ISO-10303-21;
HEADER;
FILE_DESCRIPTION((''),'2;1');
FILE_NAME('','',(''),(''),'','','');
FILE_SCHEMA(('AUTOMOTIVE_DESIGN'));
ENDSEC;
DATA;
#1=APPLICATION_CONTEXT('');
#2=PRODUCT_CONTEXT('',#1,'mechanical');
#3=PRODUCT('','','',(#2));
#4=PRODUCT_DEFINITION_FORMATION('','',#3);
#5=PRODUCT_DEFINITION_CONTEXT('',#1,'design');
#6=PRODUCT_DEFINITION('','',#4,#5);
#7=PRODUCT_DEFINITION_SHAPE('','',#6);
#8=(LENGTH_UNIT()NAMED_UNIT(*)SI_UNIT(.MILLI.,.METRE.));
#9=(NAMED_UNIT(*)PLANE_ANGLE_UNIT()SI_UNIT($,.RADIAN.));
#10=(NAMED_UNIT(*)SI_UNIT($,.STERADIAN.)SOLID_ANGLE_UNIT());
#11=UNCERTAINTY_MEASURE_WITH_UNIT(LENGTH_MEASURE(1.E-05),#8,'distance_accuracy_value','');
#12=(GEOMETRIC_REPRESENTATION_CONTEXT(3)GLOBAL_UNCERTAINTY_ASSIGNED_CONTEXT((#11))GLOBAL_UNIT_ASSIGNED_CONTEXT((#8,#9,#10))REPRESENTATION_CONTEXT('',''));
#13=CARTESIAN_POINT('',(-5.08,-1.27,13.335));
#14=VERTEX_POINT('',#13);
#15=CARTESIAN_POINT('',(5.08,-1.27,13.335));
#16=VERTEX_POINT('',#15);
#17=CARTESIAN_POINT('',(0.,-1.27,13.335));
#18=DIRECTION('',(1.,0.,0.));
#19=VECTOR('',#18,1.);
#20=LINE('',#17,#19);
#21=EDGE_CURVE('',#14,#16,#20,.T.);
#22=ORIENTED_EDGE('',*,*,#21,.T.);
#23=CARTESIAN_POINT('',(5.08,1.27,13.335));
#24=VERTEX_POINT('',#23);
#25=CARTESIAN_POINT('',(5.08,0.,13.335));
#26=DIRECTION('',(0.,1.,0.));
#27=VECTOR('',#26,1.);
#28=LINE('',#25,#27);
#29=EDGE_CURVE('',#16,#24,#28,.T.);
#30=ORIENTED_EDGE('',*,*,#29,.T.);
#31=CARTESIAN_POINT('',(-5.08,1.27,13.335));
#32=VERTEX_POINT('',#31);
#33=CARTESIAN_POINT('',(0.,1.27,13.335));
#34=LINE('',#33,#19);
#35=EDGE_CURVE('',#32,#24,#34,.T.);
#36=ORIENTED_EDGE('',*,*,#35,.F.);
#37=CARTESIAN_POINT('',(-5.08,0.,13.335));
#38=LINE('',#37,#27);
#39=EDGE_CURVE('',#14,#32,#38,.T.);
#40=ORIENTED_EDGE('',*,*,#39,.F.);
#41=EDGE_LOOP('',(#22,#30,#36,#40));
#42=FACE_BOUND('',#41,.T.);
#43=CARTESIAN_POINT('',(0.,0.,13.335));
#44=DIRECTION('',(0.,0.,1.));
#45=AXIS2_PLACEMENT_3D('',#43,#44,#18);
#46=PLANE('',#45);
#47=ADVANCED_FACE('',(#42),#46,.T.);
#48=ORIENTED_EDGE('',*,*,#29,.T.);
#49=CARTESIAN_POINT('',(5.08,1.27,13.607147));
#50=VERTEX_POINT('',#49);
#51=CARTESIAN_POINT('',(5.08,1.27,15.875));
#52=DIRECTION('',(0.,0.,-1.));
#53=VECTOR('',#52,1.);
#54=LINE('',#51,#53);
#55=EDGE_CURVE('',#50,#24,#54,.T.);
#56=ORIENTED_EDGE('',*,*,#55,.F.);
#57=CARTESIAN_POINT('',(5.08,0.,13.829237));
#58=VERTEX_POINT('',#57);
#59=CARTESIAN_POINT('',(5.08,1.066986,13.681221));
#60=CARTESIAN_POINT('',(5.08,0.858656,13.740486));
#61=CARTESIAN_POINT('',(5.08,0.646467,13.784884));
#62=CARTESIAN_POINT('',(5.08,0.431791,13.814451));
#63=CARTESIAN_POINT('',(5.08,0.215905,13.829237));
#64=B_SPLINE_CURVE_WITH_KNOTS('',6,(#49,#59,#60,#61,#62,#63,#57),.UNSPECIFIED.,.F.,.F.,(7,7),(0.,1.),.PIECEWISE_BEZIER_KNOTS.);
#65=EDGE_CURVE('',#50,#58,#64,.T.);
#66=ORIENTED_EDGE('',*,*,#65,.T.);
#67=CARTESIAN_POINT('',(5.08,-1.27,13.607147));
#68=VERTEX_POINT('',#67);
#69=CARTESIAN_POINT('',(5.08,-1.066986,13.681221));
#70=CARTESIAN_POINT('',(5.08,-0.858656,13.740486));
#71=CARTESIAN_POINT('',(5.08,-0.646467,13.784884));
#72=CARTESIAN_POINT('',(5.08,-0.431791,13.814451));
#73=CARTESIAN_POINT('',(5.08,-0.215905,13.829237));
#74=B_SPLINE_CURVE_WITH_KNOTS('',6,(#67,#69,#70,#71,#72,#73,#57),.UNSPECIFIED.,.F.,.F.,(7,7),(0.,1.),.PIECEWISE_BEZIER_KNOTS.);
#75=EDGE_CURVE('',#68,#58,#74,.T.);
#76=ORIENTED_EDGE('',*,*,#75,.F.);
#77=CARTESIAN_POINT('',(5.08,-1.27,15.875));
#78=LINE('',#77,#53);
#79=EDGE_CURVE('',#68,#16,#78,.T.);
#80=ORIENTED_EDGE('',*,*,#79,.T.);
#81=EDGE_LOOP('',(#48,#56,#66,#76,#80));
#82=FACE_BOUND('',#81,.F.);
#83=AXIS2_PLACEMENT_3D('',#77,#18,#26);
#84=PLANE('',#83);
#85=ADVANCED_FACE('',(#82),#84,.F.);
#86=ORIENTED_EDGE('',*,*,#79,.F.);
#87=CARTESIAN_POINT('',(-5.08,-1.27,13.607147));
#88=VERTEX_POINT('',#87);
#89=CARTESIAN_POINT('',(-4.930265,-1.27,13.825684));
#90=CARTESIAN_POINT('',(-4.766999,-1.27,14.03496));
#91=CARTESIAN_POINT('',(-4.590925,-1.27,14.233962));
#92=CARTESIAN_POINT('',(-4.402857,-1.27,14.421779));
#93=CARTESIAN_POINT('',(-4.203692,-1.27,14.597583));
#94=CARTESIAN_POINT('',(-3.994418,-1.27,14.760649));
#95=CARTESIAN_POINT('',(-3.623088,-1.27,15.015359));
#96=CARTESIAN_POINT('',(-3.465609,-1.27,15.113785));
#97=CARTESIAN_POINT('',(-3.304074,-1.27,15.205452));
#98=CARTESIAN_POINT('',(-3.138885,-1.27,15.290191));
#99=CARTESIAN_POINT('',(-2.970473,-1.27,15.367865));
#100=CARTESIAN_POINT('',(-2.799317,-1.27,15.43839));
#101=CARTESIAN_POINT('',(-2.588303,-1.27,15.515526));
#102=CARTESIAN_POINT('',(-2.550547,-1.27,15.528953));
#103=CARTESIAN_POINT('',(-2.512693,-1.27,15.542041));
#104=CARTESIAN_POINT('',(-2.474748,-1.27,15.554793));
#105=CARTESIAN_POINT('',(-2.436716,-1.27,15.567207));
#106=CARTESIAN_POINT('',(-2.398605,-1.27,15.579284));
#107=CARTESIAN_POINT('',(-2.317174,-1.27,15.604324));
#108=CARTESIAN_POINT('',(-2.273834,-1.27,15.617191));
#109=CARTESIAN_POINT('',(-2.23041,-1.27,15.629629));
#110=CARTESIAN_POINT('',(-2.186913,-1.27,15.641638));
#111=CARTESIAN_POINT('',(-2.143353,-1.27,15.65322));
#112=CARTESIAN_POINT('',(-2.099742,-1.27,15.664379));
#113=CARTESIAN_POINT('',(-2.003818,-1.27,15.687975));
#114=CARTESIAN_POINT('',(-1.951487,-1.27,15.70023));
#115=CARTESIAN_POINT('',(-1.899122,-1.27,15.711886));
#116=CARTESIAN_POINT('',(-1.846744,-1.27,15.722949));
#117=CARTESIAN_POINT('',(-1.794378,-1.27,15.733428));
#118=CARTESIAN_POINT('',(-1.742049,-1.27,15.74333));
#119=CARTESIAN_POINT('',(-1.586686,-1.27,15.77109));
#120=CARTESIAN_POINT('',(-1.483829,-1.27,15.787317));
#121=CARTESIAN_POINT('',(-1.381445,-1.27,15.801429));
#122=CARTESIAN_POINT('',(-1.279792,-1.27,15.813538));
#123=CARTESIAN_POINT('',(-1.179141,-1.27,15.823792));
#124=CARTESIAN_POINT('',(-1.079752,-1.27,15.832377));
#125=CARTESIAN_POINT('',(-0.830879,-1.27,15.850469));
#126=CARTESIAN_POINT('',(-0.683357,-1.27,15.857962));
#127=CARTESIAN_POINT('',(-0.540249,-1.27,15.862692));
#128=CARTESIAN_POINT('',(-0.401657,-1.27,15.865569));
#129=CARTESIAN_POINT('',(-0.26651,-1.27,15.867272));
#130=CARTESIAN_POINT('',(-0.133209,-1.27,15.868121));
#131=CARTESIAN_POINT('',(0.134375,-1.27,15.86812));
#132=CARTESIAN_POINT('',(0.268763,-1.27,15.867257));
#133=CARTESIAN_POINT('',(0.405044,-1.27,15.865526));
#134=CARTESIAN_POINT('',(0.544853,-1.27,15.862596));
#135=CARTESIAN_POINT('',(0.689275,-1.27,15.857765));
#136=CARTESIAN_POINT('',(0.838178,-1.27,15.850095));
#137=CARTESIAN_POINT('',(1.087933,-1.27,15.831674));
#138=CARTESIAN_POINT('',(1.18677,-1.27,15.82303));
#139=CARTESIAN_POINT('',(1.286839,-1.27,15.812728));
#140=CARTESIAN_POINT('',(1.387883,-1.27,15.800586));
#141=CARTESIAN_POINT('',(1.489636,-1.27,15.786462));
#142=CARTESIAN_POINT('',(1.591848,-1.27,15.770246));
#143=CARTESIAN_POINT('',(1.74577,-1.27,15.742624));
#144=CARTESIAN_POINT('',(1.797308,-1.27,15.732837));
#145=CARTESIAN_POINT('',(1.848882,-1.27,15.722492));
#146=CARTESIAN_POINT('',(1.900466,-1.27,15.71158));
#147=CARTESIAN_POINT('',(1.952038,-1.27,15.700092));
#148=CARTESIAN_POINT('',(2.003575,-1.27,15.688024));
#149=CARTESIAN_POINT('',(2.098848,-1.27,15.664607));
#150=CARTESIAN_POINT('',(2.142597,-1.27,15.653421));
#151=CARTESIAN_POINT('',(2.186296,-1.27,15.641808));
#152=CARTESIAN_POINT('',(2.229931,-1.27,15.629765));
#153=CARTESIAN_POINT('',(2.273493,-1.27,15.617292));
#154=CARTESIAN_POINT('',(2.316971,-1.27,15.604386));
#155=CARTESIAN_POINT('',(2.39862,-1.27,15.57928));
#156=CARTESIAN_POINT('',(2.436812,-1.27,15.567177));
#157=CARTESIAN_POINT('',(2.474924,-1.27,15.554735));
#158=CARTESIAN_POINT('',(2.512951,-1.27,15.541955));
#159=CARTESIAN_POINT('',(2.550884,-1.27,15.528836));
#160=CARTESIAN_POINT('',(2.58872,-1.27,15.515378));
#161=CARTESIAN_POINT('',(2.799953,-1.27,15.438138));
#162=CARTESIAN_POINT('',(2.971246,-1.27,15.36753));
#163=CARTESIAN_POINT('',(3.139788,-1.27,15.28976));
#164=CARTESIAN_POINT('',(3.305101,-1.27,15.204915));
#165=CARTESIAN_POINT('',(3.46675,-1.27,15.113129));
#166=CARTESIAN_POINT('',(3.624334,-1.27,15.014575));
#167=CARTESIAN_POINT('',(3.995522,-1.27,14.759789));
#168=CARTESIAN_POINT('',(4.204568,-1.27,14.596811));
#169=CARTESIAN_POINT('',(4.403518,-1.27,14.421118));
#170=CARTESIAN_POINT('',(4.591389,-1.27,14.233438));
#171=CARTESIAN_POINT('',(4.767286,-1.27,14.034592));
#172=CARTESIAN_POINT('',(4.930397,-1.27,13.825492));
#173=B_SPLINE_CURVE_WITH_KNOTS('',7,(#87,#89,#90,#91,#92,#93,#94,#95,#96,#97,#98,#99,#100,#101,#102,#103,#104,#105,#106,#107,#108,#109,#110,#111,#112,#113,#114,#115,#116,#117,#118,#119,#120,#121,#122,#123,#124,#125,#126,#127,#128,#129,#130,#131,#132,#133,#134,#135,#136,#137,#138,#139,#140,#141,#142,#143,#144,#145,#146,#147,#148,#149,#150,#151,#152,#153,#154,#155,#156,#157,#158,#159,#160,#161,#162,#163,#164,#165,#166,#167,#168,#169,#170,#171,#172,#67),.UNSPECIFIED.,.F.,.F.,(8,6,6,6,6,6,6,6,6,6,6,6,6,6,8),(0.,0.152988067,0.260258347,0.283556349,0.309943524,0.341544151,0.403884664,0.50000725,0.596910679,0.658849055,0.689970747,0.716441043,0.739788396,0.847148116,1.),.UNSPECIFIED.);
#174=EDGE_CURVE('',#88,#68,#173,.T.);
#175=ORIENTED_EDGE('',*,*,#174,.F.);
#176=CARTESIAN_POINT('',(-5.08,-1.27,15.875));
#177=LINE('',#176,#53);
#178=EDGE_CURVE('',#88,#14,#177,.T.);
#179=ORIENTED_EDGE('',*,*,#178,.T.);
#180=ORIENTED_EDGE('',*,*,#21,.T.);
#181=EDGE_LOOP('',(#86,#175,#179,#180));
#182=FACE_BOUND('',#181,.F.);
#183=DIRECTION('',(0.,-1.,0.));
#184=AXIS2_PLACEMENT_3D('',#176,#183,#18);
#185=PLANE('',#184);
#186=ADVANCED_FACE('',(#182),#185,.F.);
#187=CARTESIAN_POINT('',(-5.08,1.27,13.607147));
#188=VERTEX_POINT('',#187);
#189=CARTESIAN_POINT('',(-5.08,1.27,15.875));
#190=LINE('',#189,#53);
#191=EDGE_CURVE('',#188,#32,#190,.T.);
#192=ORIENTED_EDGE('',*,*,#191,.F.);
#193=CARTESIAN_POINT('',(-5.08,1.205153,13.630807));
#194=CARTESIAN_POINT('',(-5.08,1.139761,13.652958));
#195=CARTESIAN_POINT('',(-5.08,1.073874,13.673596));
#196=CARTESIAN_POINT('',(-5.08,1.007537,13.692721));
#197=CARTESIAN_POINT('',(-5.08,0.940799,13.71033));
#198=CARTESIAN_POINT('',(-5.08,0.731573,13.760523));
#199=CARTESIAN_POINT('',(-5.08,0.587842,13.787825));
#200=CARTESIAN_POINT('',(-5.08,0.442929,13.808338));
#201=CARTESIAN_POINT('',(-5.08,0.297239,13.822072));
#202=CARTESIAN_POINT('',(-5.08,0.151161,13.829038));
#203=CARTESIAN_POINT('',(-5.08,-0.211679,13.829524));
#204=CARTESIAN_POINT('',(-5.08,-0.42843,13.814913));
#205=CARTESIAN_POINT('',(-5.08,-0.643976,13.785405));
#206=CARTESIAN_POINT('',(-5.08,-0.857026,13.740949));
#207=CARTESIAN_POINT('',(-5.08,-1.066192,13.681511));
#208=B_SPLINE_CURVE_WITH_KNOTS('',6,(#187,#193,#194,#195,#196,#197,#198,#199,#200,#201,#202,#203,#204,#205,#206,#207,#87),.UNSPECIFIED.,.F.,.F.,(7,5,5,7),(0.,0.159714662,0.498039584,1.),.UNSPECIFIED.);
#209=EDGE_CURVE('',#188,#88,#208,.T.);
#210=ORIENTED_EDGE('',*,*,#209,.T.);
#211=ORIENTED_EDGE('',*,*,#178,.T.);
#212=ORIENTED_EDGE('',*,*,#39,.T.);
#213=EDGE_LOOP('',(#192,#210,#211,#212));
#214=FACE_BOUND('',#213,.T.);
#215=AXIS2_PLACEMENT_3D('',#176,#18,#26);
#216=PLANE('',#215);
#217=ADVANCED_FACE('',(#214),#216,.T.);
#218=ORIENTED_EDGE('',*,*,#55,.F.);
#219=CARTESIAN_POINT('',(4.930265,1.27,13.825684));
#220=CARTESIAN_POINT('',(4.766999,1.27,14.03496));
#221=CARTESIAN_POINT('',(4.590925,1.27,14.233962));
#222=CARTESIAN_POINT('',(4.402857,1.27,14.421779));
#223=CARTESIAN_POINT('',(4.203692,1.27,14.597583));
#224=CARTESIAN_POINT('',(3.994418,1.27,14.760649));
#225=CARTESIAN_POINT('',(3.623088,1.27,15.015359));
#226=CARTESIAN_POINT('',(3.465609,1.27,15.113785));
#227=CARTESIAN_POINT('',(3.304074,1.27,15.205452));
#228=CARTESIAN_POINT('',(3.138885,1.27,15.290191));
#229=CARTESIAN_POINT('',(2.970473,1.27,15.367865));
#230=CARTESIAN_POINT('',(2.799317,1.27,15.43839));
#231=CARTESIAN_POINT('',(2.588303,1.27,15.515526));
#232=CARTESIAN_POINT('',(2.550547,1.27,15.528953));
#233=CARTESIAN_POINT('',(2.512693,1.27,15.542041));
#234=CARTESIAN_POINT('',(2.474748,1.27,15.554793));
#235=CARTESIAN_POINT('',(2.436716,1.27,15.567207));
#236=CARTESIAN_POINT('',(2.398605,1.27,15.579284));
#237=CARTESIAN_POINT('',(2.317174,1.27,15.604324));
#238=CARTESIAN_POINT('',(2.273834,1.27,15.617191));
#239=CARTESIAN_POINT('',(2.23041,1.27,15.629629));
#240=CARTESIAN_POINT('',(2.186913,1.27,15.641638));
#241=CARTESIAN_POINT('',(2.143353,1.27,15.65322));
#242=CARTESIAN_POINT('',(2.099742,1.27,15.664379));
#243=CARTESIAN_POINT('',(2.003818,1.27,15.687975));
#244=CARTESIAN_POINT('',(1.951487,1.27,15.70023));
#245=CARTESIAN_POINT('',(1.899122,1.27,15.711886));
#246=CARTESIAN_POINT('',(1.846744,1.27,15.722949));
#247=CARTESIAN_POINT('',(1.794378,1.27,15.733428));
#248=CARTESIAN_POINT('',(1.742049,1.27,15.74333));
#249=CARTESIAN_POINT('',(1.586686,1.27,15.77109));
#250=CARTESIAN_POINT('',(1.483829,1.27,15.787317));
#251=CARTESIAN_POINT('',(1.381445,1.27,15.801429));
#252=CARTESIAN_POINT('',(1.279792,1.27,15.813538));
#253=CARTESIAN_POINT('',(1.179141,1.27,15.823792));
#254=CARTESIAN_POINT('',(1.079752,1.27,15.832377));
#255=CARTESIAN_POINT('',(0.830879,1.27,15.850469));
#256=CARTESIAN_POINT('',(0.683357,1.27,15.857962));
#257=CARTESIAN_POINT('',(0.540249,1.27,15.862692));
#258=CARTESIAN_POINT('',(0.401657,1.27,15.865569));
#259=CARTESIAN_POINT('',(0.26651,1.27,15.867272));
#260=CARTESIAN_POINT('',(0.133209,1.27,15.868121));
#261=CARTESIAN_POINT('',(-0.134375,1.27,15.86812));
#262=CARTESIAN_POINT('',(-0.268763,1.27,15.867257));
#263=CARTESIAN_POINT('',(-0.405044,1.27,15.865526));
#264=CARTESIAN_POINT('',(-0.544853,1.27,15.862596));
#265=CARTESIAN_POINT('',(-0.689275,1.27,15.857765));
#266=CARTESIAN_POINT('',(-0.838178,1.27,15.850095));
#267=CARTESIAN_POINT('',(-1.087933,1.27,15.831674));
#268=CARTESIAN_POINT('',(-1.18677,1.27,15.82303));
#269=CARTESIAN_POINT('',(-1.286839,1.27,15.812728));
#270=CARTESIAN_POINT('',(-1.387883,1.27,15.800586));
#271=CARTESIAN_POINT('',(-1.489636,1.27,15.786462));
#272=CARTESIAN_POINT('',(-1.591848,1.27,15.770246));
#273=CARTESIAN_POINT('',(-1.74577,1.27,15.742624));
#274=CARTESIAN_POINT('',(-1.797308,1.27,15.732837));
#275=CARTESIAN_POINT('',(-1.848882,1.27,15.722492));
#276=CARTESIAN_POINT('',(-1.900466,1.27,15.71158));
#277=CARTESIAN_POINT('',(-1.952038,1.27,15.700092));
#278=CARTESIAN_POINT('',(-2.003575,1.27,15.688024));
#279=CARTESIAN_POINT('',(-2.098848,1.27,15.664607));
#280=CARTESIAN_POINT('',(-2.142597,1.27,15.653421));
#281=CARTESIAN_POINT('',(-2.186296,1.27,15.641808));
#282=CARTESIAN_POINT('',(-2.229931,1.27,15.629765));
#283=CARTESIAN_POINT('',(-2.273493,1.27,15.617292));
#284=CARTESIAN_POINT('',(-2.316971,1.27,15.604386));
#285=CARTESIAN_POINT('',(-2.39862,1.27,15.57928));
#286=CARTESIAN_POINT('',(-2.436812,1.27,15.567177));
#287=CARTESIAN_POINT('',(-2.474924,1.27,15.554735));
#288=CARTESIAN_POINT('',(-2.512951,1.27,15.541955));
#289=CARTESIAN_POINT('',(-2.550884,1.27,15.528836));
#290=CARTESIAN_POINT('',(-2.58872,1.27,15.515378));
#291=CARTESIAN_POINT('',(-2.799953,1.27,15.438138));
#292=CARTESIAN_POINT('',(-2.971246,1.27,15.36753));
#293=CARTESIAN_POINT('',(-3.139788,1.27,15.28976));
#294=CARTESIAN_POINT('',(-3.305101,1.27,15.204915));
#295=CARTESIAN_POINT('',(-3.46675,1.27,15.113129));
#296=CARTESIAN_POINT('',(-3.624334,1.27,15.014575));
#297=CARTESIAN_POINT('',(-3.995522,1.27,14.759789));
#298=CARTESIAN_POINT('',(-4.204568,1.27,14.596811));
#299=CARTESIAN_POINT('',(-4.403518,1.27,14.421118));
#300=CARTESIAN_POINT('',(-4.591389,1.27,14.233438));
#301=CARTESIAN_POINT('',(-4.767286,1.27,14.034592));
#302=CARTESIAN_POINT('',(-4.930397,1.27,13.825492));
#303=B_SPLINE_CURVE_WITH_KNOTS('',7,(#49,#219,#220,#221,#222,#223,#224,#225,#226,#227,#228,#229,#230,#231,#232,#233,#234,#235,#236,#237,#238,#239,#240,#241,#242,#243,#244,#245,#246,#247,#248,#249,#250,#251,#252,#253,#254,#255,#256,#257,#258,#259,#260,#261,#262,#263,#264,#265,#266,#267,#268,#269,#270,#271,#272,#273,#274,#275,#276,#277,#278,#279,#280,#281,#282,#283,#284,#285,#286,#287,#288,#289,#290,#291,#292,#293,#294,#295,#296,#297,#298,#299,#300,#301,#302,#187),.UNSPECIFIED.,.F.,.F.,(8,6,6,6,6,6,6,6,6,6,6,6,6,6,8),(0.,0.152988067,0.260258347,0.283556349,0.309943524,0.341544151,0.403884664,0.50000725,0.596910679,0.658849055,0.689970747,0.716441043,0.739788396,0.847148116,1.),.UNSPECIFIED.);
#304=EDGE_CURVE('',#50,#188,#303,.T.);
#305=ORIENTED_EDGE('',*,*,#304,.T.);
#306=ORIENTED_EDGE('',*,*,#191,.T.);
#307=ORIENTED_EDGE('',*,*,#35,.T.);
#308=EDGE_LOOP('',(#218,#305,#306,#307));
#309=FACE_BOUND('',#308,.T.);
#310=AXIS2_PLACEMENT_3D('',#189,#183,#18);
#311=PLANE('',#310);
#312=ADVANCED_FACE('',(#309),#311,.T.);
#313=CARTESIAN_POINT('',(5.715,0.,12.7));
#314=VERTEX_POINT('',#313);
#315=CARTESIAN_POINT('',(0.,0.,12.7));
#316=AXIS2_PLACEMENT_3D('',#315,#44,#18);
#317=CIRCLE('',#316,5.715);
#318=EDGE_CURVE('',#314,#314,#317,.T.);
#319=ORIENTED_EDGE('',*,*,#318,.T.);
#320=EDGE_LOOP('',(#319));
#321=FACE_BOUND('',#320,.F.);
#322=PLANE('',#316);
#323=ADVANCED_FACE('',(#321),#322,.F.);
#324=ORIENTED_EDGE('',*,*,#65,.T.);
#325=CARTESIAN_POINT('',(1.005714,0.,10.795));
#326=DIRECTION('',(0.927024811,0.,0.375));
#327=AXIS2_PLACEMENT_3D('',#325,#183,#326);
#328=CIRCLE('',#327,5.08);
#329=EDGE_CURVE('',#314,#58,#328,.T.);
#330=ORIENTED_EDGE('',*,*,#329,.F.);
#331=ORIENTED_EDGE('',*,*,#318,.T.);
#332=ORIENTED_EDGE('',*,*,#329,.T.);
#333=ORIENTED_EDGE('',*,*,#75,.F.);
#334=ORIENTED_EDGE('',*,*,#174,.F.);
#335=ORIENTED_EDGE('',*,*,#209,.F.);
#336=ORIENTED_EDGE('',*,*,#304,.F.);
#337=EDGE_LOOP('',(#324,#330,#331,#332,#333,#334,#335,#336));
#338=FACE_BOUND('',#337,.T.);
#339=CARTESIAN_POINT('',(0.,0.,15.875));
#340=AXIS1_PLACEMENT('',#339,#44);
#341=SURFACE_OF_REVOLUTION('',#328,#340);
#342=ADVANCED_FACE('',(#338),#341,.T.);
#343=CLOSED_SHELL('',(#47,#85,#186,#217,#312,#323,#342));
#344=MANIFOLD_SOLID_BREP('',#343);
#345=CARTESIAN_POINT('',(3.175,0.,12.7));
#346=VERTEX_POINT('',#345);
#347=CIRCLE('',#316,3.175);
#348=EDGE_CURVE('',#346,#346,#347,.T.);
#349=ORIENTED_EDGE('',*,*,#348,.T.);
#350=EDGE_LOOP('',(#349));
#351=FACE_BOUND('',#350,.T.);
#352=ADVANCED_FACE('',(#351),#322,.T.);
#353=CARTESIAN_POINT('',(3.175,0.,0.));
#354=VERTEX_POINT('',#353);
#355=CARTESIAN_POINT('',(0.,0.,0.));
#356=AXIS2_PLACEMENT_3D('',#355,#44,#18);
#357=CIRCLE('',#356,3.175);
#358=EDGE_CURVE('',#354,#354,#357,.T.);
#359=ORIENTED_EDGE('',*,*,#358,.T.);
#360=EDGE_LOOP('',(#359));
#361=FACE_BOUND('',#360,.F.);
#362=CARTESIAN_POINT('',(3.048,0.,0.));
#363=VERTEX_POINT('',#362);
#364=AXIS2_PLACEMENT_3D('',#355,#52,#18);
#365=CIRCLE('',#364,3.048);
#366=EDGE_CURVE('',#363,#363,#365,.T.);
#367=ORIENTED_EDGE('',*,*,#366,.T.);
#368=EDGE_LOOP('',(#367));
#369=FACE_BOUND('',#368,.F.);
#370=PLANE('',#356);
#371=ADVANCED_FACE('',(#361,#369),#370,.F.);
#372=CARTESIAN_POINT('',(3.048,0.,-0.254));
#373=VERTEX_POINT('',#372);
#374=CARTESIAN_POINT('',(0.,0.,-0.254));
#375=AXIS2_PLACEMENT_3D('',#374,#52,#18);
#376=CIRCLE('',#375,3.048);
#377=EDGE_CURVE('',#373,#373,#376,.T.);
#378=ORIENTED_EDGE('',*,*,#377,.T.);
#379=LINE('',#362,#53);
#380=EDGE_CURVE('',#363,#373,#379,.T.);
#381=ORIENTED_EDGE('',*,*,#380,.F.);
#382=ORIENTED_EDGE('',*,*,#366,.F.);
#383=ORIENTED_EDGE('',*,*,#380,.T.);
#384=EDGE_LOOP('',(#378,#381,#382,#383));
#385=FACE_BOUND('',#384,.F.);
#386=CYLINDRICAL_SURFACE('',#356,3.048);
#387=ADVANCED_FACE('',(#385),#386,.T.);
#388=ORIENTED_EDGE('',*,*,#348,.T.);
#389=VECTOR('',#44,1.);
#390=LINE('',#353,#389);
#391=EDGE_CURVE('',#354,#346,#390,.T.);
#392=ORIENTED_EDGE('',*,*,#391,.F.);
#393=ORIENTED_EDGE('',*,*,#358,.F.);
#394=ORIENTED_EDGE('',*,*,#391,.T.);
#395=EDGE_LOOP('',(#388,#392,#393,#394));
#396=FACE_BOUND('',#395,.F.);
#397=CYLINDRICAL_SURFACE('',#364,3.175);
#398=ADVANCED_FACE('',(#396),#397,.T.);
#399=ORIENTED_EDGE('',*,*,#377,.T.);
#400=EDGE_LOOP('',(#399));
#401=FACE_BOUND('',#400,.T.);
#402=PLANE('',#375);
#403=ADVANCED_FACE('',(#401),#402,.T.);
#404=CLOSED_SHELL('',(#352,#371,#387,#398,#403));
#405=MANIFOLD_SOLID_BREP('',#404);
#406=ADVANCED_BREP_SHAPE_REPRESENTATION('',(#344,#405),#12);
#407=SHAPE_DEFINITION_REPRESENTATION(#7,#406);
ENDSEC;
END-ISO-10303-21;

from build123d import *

# Parameters (mm, degrees)
F2_R     = 5.715
F3_DEPTH = 3.175
F5_W     = 10.16
F5_H     = 2.54
F6_DEPTH = 2.54
F0_R     = 3.175
F7_DEPTH = 12.7
F8_R     = 3.048
F9_DEPTH = 0.254


# Not quite as in the source:
# - a fillet or chamfer that OpenCascade refuses, or shapes differently, is made with other operations: its cross-section is extruded or revolved along the edge and cut away or added


with BuildPart() as f3:
    # F2 (on offset) → F3 (new body)
    with BuildSketch(Plane.XY.offset(12.7)):
        Circle(F2_R)
    extrude(amount=F3_DEPTH)

    # F4: fillet of radius 5.08 on 1 edges, made by hand

    # F4_s1 → F4_t2 (revolve, cut)
    with BuildSketch(Plane.XZ):
        with BuildLine():
            ThreePointArc((5.715, 12.7), (3.8455202921, 15.0071134838), (1.0057139607, 15.875))
            Line((1.0057139607, 15.875), (5.715, 15.875))
            Line((5.715, 15.875), (5.715, 12.7))
        make_face()
    revolve(axis=Axis((0, 0, 15.875), (0, 0, 1)), mode=Mode.SUBTRACT)

    # F5 (on face) → F6 (cut)
    with BuildSketch(Plane.XY.offset(15.875)):
        Rectangle(F5_W, F5_H)
    extrude(amount=-F6_DEPTH, mode=Mode.SUBTRACT)


with BuildPart() as f7:
    # F0 (on Top) → F7 (new body)
    with BuildSketch(Plane.XY):
        Circle(F0_R)
    extrude(amount=F7_DEPTH)

    # F8 (on face) → F9 (join)
    with BuildSketch(Plane(origin=(0, 0, 0), x_dir=(1, 0, 0), z_dir=(0, 0, -1))):
        Circle(F8_R)
    extrude(amount=F9_DEPTH)


solid = Compound([f3.part, f7.part])
